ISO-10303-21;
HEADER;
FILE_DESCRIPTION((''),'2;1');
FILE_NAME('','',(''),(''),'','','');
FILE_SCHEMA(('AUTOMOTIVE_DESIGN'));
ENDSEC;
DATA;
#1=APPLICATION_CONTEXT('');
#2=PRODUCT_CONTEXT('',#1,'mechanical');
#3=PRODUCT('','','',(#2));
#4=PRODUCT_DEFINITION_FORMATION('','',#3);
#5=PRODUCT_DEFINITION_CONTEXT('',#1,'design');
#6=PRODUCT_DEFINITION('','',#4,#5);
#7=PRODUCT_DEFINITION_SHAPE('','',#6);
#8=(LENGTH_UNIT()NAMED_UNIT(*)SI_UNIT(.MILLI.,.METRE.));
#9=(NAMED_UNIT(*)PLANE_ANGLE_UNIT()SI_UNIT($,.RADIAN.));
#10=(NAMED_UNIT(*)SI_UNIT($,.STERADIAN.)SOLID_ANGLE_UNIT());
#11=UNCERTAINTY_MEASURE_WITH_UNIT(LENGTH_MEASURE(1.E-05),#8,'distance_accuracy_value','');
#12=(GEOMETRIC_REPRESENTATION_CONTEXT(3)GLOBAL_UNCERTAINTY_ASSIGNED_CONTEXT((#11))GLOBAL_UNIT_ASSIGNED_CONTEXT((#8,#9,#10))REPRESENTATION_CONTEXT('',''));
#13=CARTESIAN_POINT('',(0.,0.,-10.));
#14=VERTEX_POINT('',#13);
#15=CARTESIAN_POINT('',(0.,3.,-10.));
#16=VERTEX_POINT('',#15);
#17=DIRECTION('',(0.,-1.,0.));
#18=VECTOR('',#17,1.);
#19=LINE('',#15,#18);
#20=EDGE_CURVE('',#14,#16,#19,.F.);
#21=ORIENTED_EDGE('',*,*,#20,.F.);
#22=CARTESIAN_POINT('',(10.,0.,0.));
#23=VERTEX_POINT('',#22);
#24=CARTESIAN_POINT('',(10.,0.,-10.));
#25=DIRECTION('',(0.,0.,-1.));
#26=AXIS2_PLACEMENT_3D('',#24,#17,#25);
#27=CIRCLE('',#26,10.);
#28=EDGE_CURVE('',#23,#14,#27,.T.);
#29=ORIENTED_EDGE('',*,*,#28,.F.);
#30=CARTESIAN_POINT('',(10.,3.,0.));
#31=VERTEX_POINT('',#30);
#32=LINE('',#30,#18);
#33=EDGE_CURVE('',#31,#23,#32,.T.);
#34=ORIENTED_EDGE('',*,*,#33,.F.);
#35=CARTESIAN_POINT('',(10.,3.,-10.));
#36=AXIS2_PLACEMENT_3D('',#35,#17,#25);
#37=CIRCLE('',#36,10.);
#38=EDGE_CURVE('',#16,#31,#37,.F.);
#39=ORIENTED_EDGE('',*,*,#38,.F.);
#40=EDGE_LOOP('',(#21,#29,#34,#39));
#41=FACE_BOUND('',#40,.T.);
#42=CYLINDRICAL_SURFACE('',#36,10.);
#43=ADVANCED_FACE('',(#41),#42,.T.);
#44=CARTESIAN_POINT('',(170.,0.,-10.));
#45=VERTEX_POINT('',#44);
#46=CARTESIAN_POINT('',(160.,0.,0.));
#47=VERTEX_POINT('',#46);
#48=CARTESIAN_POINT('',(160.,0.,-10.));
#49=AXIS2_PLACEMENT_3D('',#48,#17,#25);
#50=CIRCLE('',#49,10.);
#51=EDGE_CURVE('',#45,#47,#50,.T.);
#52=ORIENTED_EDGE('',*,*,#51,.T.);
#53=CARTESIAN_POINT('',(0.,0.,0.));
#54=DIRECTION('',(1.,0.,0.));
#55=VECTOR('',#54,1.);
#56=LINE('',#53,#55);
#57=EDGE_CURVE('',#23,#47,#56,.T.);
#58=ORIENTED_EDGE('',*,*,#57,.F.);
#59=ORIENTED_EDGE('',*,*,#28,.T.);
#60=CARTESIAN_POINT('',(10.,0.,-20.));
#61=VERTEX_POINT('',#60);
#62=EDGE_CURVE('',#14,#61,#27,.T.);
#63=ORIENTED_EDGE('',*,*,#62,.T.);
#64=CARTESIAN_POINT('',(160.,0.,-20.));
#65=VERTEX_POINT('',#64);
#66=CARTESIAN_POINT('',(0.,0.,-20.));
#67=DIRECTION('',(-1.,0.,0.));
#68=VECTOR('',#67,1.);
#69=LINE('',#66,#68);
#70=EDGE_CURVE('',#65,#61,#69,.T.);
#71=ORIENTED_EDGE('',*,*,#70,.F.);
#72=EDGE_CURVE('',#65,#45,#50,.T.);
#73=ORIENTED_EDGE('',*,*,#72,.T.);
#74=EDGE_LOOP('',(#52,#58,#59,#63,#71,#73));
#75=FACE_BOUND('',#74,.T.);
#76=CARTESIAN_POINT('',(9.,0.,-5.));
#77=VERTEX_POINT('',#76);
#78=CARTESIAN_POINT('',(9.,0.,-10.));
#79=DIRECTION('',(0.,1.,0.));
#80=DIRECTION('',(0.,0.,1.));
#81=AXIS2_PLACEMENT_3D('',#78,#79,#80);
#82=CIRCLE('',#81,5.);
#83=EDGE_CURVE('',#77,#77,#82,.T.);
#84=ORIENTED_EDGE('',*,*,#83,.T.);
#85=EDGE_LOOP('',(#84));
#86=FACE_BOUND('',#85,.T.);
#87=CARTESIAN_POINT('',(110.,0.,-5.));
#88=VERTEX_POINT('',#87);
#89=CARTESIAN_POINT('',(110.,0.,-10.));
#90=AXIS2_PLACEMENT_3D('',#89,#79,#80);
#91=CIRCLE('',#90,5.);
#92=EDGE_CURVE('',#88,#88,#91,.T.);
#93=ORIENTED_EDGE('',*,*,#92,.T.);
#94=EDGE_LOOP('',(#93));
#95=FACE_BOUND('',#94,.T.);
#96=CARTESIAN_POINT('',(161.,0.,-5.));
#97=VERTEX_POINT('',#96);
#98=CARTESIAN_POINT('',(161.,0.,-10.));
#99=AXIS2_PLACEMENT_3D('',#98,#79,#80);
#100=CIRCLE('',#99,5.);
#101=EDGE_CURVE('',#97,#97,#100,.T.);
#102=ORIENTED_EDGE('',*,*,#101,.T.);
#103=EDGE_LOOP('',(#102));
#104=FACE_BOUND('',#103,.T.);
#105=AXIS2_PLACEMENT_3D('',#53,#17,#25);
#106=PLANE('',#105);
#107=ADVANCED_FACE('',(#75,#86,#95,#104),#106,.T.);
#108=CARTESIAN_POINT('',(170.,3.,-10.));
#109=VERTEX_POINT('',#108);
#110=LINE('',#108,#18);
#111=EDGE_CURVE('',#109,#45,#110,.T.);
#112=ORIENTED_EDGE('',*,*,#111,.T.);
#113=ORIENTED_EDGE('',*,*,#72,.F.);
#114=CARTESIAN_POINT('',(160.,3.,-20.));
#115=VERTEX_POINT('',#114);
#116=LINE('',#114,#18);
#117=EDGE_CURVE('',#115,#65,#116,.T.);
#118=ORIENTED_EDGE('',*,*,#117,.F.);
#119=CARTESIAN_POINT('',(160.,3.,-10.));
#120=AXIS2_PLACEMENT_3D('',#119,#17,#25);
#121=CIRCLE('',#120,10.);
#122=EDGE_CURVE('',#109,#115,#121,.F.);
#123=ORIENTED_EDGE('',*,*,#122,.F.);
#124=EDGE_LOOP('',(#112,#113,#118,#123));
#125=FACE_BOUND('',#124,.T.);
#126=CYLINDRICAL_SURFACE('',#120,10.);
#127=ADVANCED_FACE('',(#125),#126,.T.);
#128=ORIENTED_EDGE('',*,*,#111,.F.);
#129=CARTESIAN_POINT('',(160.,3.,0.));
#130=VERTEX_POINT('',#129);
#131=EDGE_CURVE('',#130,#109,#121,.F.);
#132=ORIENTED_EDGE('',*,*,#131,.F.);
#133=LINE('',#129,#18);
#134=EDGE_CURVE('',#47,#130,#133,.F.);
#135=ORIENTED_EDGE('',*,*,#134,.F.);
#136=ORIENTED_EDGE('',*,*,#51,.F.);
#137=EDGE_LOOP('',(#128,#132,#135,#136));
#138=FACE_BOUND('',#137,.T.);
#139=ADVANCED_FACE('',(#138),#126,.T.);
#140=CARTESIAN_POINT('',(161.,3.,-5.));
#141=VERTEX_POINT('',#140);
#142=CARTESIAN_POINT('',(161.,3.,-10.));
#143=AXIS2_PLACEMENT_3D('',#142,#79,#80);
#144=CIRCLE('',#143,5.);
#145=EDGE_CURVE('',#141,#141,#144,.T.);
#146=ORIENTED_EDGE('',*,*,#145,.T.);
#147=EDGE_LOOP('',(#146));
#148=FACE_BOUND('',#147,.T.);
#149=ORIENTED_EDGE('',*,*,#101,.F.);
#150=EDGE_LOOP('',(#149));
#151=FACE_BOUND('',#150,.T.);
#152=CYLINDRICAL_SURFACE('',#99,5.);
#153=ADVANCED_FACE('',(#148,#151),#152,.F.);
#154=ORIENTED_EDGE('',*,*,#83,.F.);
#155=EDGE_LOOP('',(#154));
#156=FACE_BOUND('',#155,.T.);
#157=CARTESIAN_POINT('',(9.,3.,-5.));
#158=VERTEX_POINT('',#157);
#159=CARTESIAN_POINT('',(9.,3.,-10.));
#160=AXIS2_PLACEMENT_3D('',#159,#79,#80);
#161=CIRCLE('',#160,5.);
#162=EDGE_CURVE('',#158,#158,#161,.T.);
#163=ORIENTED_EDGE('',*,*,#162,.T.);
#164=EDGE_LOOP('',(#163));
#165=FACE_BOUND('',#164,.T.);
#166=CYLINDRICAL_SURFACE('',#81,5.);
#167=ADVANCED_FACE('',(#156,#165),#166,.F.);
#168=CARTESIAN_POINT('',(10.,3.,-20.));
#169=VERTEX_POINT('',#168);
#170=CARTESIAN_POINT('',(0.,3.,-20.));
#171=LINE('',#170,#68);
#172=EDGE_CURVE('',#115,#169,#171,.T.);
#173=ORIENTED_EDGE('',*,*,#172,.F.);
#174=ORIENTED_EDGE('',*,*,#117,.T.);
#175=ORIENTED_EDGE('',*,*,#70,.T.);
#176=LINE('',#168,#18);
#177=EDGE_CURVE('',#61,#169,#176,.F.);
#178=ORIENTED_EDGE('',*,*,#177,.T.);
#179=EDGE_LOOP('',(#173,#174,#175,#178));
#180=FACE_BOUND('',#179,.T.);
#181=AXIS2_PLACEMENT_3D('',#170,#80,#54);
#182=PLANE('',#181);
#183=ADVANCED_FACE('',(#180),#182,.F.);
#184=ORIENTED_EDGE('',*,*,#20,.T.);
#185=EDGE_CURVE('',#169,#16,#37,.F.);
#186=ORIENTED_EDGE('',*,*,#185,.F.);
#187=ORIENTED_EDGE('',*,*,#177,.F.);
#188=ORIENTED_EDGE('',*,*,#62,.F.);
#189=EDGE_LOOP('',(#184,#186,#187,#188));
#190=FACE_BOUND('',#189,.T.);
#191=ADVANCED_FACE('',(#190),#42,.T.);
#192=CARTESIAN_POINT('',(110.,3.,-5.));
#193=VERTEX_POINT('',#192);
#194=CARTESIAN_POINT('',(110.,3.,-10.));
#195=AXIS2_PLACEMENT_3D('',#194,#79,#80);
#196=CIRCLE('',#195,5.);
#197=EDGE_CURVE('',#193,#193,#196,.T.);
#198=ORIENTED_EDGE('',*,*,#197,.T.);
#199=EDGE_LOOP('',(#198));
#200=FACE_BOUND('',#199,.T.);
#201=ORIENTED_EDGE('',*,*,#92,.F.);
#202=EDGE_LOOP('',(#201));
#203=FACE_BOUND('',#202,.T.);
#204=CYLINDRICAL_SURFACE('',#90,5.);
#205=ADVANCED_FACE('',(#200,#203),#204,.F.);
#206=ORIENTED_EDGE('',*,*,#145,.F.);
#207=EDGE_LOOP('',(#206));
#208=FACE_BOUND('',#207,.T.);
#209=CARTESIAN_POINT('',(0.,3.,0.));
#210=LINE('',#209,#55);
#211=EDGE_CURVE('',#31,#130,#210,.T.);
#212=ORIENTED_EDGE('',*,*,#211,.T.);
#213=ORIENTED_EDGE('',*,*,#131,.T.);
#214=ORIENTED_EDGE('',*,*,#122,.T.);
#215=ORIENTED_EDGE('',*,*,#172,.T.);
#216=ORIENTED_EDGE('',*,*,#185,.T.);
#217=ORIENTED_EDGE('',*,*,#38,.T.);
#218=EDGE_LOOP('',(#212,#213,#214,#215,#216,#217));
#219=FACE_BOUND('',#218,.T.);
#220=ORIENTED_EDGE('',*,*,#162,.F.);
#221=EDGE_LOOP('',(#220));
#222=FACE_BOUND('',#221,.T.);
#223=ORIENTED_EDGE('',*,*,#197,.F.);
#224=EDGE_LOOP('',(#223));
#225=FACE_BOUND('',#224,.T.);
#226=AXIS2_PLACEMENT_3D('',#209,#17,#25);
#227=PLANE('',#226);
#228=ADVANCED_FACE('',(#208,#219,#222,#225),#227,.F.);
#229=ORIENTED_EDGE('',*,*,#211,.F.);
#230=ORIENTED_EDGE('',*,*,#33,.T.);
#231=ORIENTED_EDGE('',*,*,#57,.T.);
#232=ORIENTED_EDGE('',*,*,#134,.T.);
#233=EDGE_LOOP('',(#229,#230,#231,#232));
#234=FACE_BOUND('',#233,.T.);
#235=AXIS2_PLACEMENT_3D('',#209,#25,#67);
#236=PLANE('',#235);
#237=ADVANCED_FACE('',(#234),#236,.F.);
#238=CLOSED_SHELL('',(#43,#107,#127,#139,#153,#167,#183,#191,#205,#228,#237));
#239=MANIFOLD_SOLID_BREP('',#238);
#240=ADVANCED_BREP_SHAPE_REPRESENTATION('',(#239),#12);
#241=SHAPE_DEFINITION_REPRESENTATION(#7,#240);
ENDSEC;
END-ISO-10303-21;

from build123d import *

# Parameters (mm, degrees)
SKETCH2_W           = 170
SKETCH2_H           = 20
BOSS_EXTRUDE1_DEPTH = 3
SKETCH3_R           = 5
CUT_EXTRUDE1_DEPTH  = 172.198714948
SKETCH4_R           = 5
CUT_EXTRUDE2_DEPTH  = 172.198714948
FILLET1_R           = 10
FILLET2_R           = 10
SKETCH5_R           = 5
CUT_EXTRUDE3_DEPTH  = 172.198714948


with BuildPart() as part:
    # Sketch2 → Boss-Extrude1 (new body)
    with BuildSketch(Plane(origin=(0, 0, 0), x_dir=(1, 0, 0), z_dir=(0, 1, 0))):
        with Locations((85, 10)):
            Rectangle(SKETCH2_W, SKETCH2_H)
    extrude(amount=BOSS_EXTRUDE1_DEPTH)

    # Sketch3 → Cut-Extrude1 (cut, through all)
    with BuildSketch(Plane(origin=(0, 3, 0), x_dir=(1, 0, 0), z_dir=(0, 1, 0))):
        with Locations(Location((9, 10, 0), (0, 0, 270))):
            Circle(SKETCH3_R)
    extrude(amount=-CUT_EXTRUDE1_DEPTH, mode=Mode.SUBTRACT)

    # Sketch4 → Cut-Extrude2 (cut, through all)
    with BuildSketch(Plane(origin=(0, 3, 0), x_dir=(1, 0, 0), z_dir=(0, 1, 0))):
        with Locations(Location((161, 10, 0), (0, 0, 270))):
            Circle(SKETCH4_R)
    extrude(amount=-CUT_EXTRUDE2_DEPTH, mode=Mode.SUBTRACT)

    # Fillet1
    fillet1_edges = [part.edges().sort_by_distance(p)[0] for p in [
        (0, 1.5, -20),
        (0, 1.5, 0),
    ]]
    fillet(fillet1_edges, radius=FILLET1_R - 0.0001)  # a hair under: the kernel refuses the full size

    # Fillet2
    fillet2_edges = [part.edges().sort_by_distance(p)[0] for p in [
        (170, 1.5, -20),
        (170, 1.5, 0),
    ]]
    fillet(fillet2_edges, radius=FILLET2_R - 0.0001)  # a hair under: the kernel refuses the full size

    # Sketch5 → Cut-Extrude3 (cut, through all)
    with BuildSketch(Plane(origin=(0, 3, 0), x_dir=(1, 0, 0), z_dir=(0, 1, 0))):
        with Locations(Location((110, 10, 0), (0, 0, 270))):
            Circle(SKETCH5_R)
    extrude(amount=-CUT_EXTRUDE3_DEPTH, mode=Mode.SUBTRACT)


solid = part.part
